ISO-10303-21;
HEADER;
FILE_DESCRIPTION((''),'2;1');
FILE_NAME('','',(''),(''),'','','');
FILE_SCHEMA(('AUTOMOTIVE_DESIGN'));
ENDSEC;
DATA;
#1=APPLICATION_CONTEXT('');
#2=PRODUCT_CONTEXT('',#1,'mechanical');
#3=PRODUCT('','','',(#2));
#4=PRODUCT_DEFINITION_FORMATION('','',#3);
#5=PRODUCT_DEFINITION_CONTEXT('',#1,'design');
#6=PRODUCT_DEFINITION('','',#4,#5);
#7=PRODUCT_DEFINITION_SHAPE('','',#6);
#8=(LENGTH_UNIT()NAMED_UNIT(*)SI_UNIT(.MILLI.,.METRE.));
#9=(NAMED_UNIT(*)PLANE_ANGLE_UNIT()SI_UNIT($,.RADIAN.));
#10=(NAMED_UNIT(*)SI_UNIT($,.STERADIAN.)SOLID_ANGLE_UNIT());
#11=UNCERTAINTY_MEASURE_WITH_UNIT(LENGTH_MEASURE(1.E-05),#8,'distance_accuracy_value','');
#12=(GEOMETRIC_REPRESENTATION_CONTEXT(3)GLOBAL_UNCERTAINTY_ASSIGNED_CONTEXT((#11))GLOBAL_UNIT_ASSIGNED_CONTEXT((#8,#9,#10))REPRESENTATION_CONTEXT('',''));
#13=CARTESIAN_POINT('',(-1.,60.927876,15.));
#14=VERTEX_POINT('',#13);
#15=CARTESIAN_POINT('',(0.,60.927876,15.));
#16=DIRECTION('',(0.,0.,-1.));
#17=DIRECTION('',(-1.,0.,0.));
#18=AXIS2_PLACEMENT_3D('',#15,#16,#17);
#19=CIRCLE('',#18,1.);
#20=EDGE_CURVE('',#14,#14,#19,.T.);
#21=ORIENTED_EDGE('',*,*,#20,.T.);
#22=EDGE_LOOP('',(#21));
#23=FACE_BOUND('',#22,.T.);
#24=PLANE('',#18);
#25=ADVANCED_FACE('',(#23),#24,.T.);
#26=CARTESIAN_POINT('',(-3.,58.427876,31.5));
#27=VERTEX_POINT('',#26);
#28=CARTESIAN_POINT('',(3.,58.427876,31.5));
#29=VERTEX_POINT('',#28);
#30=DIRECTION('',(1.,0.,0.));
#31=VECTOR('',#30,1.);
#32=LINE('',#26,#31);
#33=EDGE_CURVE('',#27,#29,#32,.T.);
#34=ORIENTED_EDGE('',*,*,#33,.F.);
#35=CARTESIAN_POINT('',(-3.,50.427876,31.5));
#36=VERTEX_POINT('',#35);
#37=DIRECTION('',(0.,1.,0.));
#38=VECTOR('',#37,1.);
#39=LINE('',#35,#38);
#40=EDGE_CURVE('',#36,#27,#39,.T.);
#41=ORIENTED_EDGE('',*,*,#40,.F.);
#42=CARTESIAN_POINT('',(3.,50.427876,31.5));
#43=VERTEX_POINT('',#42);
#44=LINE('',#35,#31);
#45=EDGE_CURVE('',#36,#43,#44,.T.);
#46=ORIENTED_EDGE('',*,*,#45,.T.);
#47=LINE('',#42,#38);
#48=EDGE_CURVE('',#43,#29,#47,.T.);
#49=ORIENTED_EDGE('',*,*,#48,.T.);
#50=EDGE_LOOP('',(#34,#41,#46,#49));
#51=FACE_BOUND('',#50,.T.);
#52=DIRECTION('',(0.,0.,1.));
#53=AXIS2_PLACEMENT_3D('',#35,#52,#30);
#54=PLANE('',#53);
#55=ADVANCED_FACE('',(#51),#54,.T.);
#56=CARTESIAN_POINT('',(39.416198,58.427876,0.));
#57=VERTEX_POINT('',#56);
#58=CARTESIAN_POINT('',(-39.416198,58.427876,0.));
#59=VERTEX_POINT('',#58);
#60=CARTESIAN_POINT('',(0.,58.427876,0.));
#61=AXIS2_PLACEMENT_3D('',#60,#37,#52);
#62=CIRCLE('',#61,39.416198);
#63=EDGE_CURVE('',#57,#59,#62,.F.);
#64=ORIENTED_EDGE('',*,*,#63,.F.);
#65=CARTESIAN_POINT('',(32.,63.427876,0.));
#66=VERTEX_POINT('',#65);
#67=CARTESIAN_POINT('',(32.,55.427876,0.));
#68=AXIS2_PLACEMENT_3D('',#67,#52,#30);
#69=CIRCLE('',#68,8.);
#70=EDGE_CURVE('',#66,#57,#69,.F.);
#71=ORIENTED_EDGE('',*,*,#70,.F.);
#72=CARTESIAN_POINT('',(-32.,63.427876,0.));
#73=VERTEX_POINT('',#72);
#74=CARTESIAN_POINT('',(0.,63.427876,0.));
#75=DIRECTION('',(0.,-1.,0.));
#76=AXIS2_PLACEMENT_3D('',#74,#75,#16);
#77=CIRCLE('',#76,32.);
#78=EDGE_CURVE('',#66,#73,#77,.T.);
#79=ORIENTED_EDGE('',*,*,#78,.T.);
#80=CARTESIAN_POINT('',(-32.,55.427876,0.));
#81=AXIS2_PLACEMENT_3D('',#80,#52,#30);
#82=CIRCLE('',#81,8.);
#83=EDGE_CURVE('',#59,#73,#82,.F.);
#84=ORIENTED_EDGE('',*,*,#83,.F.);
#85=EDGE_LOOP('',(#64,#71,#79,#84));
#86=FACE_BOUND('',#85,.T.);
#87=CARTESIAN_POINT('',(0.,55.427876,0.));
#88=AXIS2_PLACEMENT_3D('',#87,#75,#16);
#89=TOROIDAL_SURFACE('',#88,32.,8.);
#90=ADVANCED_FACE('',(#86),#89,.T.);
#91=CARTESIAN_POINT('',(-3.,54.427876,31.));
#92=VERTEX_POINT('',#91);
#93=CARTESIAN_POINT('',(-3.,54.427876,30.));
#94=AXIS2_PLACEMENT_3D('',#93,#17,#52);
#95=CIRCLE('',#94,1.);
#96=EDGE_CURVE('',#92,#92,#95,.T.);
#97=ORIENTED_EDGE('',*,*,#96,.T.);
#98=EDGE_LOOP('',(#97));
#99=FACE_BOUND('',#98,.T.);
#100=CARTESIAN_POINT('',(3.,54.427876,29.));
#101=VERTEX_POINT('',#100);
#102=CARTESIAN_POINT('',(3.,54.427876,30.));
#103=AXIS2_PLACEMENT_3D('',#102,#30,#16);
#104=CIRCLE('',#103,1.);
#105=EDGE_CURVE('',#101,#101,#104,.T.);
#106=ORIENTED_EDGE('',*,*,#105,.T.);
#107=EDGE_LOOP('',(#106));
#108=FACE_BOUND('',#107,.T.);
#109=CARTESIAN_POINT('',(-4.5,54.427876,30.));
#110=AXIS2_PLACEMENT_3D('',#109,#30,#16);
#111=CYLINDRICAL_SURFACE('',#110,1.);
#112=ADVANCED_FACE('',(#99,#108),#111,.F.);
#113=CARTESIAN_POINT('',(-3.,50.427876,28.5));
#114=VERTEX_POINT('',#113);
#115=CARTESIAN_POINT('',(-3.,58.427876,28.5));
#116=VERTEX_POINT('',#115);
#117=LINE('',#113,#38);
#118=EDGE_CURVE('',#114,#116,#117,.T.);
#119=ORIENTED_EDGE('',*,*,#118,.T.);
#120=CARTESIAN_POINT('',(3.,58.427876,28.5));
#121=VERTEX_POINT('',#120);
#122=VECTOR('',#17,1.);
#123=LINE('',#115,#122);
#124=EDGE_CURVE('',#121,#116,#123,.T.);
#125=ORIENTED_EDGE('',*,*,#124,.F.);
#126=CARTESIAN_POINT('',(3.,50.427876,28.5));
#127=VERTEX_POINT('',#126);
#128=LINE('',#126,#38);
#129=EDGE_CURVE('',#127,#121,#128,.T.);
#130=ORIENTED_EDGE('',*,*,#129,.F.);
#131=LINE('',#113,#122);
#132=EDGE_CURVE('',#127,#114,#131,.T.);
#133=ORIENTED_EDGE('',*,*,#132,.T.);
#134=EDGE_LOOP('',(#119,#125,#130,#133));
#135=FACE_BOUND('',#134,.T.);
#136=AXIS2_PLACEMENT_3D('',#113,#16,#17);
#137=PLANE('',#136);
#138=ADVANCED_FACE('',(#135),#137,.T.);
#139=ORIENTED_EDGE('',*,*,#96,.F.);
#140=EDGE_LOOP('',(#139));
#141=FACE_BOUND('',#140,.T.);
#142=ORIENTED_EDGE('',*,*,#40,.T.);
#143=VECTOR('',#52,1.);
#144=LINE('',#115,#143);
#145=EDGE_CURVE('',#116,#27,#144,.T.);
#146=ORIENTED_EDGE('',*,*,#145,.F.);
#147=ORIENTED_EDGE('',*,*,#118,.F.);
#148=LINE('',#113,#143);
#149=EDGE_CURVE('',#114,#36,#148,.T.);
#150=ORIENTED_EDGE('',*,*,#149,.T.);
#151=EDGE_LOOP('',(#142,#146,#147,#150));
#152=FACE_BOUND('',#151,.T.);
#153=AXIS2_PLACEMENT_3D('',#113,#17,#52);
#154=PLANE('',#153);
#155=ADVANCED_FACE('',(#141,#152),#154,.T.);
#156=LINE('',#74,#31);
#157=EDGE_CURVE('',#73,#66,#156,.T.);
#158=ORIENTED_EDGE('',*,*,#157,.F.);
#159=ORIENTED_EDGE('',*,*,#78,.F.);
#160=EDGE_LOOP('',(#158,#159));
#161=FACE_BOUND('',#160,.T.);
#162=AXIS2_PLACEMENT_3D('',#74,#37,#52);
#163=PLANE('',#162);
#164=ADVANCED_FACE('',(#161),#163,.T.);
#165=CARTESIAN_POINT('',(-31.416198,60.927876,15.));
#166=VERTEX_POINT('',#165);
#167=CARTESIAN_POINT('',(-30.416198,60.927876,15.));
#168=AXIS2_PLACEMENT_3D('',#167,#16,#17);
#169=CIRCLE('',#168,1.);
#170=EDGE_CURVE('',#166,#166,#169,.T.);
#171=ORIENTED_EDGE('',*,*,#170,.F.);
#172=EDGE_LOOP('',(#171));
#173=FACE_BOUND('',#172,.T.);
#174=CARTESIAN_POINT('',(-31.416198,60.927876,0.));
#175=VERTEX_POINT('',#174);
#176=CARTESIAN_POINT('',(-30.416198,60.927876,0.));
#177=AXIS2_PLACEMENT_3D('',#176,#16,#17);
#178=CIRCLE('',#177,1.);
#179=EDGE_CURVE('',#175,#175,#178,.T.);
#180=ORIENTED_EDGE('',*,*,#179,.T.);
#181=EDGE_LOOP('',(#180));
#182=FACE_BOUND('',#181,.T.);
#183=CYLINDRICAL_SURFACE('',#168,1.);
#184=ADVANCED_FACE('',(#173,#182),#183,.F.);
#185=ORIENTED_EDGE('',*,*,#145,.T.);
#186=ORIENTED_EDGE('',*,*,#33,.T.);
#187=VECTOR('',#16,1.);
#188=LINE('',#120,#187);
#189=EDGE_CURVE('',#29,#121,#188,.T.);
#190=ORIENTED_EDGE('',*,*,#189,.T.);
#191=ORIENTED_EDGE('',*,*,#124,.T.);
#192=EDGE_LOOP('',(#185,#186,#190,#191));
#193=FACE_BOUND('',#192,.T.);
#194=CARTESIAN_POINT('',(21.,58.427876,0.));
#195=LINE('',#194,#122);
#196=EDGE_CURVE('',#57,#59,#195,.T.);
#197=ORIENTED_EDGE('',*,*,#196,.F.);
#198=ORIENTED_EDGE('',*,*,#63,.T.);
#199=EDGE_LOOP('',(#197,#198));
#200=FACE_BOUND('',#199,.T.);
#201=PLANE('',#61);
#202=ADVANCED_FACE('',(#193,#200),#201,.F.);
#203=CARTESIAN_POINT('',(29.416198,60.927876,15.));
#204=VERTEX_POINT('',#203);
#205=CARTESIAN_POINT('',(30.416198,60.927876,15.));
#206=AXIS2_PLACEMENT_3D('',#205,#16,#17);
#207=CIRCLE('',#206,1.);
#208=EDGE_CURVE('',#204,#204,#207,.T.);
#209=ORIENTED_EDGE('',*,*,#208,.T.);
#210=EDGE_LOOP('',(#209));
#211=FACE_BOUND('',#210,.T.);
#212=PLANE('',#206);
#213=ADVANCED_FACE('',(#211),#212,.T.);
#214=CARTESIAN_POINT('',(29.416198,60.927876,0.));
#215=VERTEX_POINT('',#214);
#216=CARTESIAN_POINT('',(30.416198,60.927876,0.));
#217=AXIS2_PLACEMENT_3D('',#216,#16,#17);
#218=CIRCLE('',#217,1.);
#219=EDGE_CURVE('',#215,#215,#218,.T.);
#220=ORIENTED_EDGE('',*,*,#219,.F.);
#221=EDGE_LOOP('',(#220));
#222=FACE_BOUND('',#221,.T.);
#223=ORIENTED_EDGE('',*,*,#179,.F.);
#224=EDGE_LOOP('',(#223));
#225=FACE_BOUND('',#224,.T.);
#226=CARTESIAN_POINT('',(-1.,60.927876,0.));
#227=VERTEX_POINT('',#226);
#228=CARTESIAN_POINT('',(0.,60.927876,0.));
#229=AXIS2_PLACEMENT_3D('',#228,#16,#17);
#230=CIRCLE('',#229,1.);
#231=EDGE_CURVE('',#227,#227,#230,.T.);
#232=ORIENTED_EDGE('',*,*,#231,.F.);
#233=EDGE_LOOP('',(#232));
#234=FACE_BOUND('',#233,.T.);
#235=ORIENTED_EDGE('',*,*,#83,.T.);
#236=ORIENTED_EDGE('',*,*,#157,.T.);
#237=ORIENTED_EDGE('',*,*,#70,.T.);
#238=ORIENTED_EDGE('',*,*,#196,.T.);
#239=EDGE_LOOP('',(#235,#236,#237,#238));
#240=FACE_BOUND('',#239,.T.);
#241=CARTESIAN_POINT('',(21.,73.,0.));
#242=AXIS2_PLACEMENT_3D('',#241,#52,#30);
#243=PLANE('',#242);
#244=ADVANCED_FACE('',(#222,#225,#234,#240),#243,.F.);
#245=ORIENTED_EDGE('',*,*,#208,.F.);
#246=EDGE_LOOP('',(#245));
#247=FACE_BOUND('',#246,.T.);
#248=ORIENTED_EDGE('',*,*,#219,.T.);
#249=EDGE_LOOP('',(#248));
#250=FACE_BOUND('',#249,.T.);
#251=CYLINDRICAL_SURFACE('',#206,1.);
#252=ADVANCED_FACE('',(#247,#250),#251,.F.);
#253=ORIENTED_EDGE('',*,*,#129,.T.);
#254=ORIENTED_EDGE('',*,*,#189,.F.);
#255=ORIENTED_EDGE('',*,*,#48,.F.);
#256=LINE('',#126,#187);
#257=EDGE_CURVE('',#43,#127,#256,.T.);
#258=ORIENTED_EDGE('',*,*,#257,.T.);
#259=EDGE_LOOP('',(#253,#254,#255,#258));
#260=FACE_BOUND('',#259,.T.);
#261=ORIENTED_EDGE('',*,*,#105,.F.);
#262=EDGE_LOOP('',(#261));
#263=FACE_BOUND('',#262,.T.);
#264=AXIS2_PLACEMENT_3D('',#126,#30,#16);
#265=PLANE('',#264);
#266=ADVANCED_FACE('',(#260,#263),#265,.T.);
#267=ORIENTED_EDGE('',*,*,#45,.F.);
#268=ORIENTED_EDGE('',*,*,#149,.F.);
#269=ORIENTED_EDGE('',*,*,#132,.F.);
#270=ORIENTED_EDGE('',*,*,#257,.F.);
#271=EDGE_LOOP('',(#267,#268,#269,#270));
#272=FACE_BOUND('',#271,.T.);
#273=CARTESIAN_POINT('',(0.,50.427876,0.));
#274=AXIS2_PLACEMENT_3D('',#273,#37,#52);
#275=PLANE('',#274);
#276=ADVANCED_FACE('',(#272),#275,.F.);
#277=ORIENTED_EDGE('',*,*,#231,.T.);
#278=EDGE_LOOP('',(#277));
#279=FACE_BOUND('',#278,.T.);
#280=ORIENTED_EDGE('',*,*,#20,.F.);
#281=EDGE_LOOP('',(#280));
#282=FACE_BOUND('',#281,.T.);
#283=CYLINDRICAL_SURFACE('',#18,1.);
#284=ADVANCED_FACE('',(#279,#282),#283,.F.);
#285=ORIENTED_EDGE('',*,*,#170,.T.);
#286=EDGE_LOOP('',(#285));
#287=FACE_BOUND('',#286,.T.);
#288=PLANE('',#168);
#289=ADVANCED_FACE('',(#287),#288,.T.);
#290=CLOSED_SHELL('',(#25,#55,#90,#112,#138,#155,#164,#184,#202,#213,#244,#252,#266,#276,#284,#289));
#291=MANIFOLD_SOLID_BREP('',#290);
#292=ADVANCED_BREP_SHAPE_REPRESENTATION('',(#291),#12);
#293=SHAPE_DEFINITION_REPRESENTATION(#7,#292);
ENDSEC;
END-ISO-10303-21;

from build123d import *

# Parameters (mm, degrees)
CUT_EXTRUDE3_DEPTH           = 60
CUT_EXTRUDE5_DEPTH           = 2
CUT_EXTRUDE5_DEPTH_BACK      = 30
SKETCH9_R                    = 38
SKETCH9_R_2                  = 23
SKETCH19_W                   = 12
SKETCH19_H                   = 36.5
CUT_REVOLVE2_ANGLE           = 65
CUT_REVOLVE2_OTHER_WAY_ANGLE = 65
SKETCH21_W                   = 3.25
SKETCH21_H                   = 4
BOSS_EXTRUDE3_DEPTH          = 1.35
CIRPATTERN1_COUNT            = 5
CUT_EXTRUDE9_START           = -5
CUT_EXTRUDE9_DEPTH           = 5
SKETCH23_R                   = 10.5
CUT_EXTRUDE10_DEPTH          = 10
SKETCH24_W                   = 15
SKETCH24_H                   = 8
BOSS_EXTRUDE4_DEPTH          = 8
SKETCH26_W                   = 10
SKETCH26_H                   = 6
CUT_EXTRUDE11_DEPTH          = 10
SKETCH27_W                   = 4
SKETCH27_H                   = 5
CUT_EXTRUDE12_DEPTH          = 5
CUT_EXTRUDE14_DEPTH          = 2
CUT_EXTRUDE14_DEPTH_BACK     = 30
SKETCH29_R                   = 1
CUT_EXTRUDE15_DEPTH          = 15
FILLET1_R                    = 6
FILLET2_R                    = 8
INTERSECT1_DEPTH             = 58.427876097
SKETCH31_W                   = 6
SKETCH31_H                   = 3
BOSS_EXTRUDE7_DEPTH          = 8
SKETCH32_R                   = 1
CUT_EXTRUDE16_DEPTH          = 7.5


# Read off the part's stored shape, not the designer's step: Cut-Extrude9, Intersect1
with BuildPart() as part:
    # Sketch1 → Revolve1 (revolve)
    with BuildSketch(Plane.XY, mode=Mode.PRIVATE) as revolve1_sk:
        with BuildLine():
            Line((0, 63.427876097), (32, 63.427876097))
            ThreePointArc((32, 63.427876097), (37.656854249, 61.084730346), (40, 55.427876097))
            Line((40, 55.427876097), (40, 28.846818009))
            ThreePointArc((40, 28.846818009), (38.792081772, 24.082439968), (35.460140376, 20.469057744))
            Line((35.460140376, 20.469057744), (28.539859624, 15.958818353))
            ThreePointArc((28.539859624, 15.958818353), (25.207918228, 12.345436129), (24, 7.581058088))
            Line((24, 7.581058088), (24, 3.25))
            Line((24, 3.25), (24.35, 3))
            Line((24.35, 3), (24.35, 0))
            Line((24.35, 0), (22.5, 0))
            Line((22.5, 0), (22.5, 12.5))
            ThreePointArc((22.5, 12.5), (22.353553391, 12.853553391), (22, 13))
            Line((22, 13), (0, 13))
            Line((0, 13), (0, 63.427876097))
        make_face()
    revolve(revolve1_sk.sketch.rotate(Axis((0, 0, 0), (0, 1, 0)), 90), axis=Axis((0, 0, 0), (0, 1, 0)))

    # Sketch11 → Cut-Extrude3 (cut)
    with BuildSketch(Plane(origin=(0, 13, 0), x_dir=(-1, 0, 0), z_dir=(0, -1, 0))):
        with BuildLine():
            Line((-21, 0), (21, 0))
            ThreePointArc((21, 0), (0, 21), (-21, 0))
        make_face()
    extrude(amount=-CUT_EXTRUDE3_DEPTH, mode=Mode.SUBTRACT)

    # Sketch9 → Cut-Extrude5 (cut, two sides: drawn at the far end of the back side and taken through both)
    with BuildSketch(Plane(origin=(0, 55.427876097, 0), x_dir=(1, 0, 0), z_dir=(0, 1, 0)).offset(-CUT_EXTRUDE5_DEPTH_BACK)):
        with Locations(Location((0, 0, 0), (0, 0, 270))):
            Circle(SKETCH9_R)
        with Locations(Location((0, 0, 0), (0, 0, 270))):
            Circle(SKETCH9_R_2, mode=Mode.SUBTRACT)
    extrude(amount=CUT_EXTRUDE5_DEPTH + CUT_EXTRUDE5_DEPTH_BACK, mode=Mode.SUBTRACT)

    # Sketch19 → Cut-Revolve2 (revolve, cut)
    with BuildSketch(Plane(origin=(0, 0, 0), x_dir=(0, 0, -1), z_dir=(1, 0, 0))):
        with Locations((-41.064715832, 37.177876097)):
            Rectangle(SKETCH19_W, SKETCH19_H)
    revolve(axis=Axis((0, 0, 0), (0, 1, 0)), revolution_arc=CUT_REVOLVE2_ANGLE, mode=Mode.SUBTRACT)

    # Sketch19 → Cut-Revolve2 other way (revolve, cut)
    with BuildSketch(Plane(origin=(0, 0, 0), x_dir=(0, 0, -1), z_dir=(1, 0, 0))):
        with Locations((-41.064715832, 37.177876097)):
            Rectangle(SKETCH19_W, SKETCH19_H)
    revolve(axis=Axis((0, 0, 0), (0, -1, 0)), revolution_arc=CUT_REVOLVE2_OTHER_WAY_ANGLE, mode=Mode.SUBTRACT)

    # Sketch21 → Boss-Extrude3 (add)
    with BuildSketch(Plane(origin=(0, 0, 22.5), x_dir=(-1, 0, 0), z_dir=(0, 0, -1))):
        with Locations((0, 2)):
            Rectangle(SKETCH21_W, SKETCH21_H)
    boss_extrude3 = extrude(amount=BOSS_EXTRUDE3_DEPTH)

    # CirPattern1: Boss-Extrude3 ×5 about axis
    cirpattern1_axis = Axis((0, 0, 0), (0, 1, 0))
    for i in range(1, CIRPATTERN1_COUNT):
        add(boss_extrude3.rotate(cirpattern1_axis, i * 360 / CIRPATTERN1_COUNT))

    # Cut-Extrude9 outline → Cut-Extrude9 (cut)
    with BuildSketch(Plane(origin=(0, 63.427876097, 0), x_dir=(1, 0, 0), z_dir=(0, 1, 0)).offset(CUT_EXTRUDE9_START)):
        with BuildLine():
            ThreePointArc((40, 0), (0, 40), (-40, 0))
            Line((-40, 0), (-21, 0))
            ThreePointArc((-21, 0), (0, 21), (21, 0))
            Line((21, 0), (40, 0))
        make_face()
    extrude(amount=CUT_EXTRUDE9_DEPTH, mode=Mode.SUBTRACT)

    # Sketch23 → Cut-Extrude10 (cut)
    with BuildSketch(Plane(origin=(0, 0, -40), x_dir=(-1, 0, 0), z_dir=(0, 0, -1))):
        with Locations((0, 42.137876097)):
            Circle(SKETCH23_R)
    extrude(amount=-CUT_EXTRUDE10_DEPTH, mode=Mode.SUBTRACT)

    # Sketch24 → Boss-Extrude4 (add)
    with BuildSketch(Plane(origin=(0, 58.427876097, 0), x_dir=(1, 0, 0), z_dir=(0, 1, 0))):
        with Locations((0, 30)):
            Rectangle(SKETCH24_W, SKETCH24_H)
    extrude(amount=-BOSS_EXTRUDE4_DEPTH)

    # Sketch26 → Cut-Extrude11 (cut)
    with BuildSketch(Plane(origin=(0, 58.427876097, 0), x_dir=(1, 0, 0), z_dir=(0, 1, 0))):
        with Locations((0, 30)):
            Rectangle(SKETCH26_W, SKETCH26_H)
    extrude(amount=-CUT_EXTRUDE11_DEPTH, mode=Mode.SUBTRACT)

    # Sketch27 → Cut-Extrude12 (cut)
    with BuildSketch(Plane(origin=(7.5, 0, 0), x_dir=(0, 0, -1), z_dir=(1, 0, 0))):
        with Locations((30, 53.927876097)):
            Rectangle(SKETCH27_W, SKETCH27_H)
    extrude(amount=-CUT_EXTRUDE12_DEPTH, mode=Mode.SUBTRACT)

    # Sketch28 → Cut-Extrude14 (cut, two sides: drawn at the far end of the back side and taken through both)
    with BuildSketch(Plane(origin=(0, 55.427876097, 0), x_dir=(1, 0, 0), z_dir=(0, 1, 0)).offset(-CUT_EXTRUDE14_DEPTH_BACK)):
        with BuildLine():
            Line((-22.912878475, -2), (22.912878475, -2))
            ThreePointArc((22.912878475, -2), (0, -23), (-22.912878475, -2))
        make_face()
    extrude(amount=CUT_EXTRUDE14_DEPTH + CUT_EXTRUDE14_DEPTH_BACK, mode=Mode.SUBTRACT)

    # Sketch29 → Cut-Extrude15 (cut)
    with BuildSketch(Plane(origin=(0, 0, 0), x_dir=(-1, 0, 0), z_dir=(0, 0, -1))):
        with Locations((-30.416198487, 60.927876097)):
            Circle(SKETCH29_R)
        with Locations((30.416198487, 60.927876097)):
            Circle(SKETCH29_R)
        with Locations((0, 60.927876097)):
            Circle(SKETCH29_R)
    extrude(amount=-CUT_EXTRUDE15_DEPTH, mode=Mode.SUBTRACT)

    # Fillet1
    fillet1_edges = [part.edges().sort_by_distance(p)[0] for p in [
        (21, 35.713938048, 0),
        (-21, 35.713938048, 0),
    ]]
    fillet(fillet1_edges, radius=FILLET1_R)

    # Fillet2
    fillet2_edges = [part.edges().sort_by_distance(p)[0] for p in [
        (-22.912878475, 41.427876097, 2),
        (22.912878475, 41.427876097, 2),
    ]]
    fillet(fillet2_edges, radius=FILLET2_R)

    # Intersect1 outline → Intersect1 (cut)
    with BuildSketch(Plane(origin=(0, 0, 0), x_dir=(1, 0, 0), z_dir=(0, 1, 0))):
        with BuildLine():
            Line((-37.508702776, -13.895942431), (-42, -15.355253362))
            Line((-42, -15.355253362), (-42, -41))
            Line((-42, -41), (42, -41))
            Line((42, -41), (42, -15.355253362))
            Line((42, -15.355253362), (37.508702776, -13.895942431))
            ThreePointArc((37.508702776, -13.895942431), (0, 40), (-37.508702776, -13.895942431))
        make_face()
        with BuildLine():
            ThreePointArc((19.246817919, 8.4), (18.767687244, 2.713664655), (13.747727085, 0))
            Line((13.747727085, 0), (-13.747727085, 0))
            ThreePointArc((-13.747727085, 0), (-18.767687244, 2.713664655), (-19.246817919, 8.4))
            ThreePointArc((-19.246817919, 8.4), (0, 21), (19.246817919, 8.4))
        make_face(mode=Mode.SUBTRACT)
    extrude(amount=INTERSECT1_DEPTH, mode=Mode.SUBTRACT)

    # Sketch31 → Boss-Extrude7 (add)
    with BuildSketch(Plane(origin=(0, 58.427876097, 0), x_dir=(1, 0, 0), z_dir=(0, 1, 0))):
        with Locations((0, -30)):
            Rectangle(SKETCH31_W, SKETCH31_H)
    extrude(amount=-BOSS_EXTRUDE7_DEPTH)

    # Sketch32 → Cut-Extrude16 (cut)
    with BuildSketch(Plane(origin=(3, 0, 0), x_dir=(0, 0, -1), z_dir=(1, 0, 0))):
        with Locations((-30, 54.427876097)):
            Circle(SKETCH32_R)
    extrude(amount=-CUT_EXTRUDE16_DEPTH, mode=Mode.SUBTRACT)


solid = part.part
